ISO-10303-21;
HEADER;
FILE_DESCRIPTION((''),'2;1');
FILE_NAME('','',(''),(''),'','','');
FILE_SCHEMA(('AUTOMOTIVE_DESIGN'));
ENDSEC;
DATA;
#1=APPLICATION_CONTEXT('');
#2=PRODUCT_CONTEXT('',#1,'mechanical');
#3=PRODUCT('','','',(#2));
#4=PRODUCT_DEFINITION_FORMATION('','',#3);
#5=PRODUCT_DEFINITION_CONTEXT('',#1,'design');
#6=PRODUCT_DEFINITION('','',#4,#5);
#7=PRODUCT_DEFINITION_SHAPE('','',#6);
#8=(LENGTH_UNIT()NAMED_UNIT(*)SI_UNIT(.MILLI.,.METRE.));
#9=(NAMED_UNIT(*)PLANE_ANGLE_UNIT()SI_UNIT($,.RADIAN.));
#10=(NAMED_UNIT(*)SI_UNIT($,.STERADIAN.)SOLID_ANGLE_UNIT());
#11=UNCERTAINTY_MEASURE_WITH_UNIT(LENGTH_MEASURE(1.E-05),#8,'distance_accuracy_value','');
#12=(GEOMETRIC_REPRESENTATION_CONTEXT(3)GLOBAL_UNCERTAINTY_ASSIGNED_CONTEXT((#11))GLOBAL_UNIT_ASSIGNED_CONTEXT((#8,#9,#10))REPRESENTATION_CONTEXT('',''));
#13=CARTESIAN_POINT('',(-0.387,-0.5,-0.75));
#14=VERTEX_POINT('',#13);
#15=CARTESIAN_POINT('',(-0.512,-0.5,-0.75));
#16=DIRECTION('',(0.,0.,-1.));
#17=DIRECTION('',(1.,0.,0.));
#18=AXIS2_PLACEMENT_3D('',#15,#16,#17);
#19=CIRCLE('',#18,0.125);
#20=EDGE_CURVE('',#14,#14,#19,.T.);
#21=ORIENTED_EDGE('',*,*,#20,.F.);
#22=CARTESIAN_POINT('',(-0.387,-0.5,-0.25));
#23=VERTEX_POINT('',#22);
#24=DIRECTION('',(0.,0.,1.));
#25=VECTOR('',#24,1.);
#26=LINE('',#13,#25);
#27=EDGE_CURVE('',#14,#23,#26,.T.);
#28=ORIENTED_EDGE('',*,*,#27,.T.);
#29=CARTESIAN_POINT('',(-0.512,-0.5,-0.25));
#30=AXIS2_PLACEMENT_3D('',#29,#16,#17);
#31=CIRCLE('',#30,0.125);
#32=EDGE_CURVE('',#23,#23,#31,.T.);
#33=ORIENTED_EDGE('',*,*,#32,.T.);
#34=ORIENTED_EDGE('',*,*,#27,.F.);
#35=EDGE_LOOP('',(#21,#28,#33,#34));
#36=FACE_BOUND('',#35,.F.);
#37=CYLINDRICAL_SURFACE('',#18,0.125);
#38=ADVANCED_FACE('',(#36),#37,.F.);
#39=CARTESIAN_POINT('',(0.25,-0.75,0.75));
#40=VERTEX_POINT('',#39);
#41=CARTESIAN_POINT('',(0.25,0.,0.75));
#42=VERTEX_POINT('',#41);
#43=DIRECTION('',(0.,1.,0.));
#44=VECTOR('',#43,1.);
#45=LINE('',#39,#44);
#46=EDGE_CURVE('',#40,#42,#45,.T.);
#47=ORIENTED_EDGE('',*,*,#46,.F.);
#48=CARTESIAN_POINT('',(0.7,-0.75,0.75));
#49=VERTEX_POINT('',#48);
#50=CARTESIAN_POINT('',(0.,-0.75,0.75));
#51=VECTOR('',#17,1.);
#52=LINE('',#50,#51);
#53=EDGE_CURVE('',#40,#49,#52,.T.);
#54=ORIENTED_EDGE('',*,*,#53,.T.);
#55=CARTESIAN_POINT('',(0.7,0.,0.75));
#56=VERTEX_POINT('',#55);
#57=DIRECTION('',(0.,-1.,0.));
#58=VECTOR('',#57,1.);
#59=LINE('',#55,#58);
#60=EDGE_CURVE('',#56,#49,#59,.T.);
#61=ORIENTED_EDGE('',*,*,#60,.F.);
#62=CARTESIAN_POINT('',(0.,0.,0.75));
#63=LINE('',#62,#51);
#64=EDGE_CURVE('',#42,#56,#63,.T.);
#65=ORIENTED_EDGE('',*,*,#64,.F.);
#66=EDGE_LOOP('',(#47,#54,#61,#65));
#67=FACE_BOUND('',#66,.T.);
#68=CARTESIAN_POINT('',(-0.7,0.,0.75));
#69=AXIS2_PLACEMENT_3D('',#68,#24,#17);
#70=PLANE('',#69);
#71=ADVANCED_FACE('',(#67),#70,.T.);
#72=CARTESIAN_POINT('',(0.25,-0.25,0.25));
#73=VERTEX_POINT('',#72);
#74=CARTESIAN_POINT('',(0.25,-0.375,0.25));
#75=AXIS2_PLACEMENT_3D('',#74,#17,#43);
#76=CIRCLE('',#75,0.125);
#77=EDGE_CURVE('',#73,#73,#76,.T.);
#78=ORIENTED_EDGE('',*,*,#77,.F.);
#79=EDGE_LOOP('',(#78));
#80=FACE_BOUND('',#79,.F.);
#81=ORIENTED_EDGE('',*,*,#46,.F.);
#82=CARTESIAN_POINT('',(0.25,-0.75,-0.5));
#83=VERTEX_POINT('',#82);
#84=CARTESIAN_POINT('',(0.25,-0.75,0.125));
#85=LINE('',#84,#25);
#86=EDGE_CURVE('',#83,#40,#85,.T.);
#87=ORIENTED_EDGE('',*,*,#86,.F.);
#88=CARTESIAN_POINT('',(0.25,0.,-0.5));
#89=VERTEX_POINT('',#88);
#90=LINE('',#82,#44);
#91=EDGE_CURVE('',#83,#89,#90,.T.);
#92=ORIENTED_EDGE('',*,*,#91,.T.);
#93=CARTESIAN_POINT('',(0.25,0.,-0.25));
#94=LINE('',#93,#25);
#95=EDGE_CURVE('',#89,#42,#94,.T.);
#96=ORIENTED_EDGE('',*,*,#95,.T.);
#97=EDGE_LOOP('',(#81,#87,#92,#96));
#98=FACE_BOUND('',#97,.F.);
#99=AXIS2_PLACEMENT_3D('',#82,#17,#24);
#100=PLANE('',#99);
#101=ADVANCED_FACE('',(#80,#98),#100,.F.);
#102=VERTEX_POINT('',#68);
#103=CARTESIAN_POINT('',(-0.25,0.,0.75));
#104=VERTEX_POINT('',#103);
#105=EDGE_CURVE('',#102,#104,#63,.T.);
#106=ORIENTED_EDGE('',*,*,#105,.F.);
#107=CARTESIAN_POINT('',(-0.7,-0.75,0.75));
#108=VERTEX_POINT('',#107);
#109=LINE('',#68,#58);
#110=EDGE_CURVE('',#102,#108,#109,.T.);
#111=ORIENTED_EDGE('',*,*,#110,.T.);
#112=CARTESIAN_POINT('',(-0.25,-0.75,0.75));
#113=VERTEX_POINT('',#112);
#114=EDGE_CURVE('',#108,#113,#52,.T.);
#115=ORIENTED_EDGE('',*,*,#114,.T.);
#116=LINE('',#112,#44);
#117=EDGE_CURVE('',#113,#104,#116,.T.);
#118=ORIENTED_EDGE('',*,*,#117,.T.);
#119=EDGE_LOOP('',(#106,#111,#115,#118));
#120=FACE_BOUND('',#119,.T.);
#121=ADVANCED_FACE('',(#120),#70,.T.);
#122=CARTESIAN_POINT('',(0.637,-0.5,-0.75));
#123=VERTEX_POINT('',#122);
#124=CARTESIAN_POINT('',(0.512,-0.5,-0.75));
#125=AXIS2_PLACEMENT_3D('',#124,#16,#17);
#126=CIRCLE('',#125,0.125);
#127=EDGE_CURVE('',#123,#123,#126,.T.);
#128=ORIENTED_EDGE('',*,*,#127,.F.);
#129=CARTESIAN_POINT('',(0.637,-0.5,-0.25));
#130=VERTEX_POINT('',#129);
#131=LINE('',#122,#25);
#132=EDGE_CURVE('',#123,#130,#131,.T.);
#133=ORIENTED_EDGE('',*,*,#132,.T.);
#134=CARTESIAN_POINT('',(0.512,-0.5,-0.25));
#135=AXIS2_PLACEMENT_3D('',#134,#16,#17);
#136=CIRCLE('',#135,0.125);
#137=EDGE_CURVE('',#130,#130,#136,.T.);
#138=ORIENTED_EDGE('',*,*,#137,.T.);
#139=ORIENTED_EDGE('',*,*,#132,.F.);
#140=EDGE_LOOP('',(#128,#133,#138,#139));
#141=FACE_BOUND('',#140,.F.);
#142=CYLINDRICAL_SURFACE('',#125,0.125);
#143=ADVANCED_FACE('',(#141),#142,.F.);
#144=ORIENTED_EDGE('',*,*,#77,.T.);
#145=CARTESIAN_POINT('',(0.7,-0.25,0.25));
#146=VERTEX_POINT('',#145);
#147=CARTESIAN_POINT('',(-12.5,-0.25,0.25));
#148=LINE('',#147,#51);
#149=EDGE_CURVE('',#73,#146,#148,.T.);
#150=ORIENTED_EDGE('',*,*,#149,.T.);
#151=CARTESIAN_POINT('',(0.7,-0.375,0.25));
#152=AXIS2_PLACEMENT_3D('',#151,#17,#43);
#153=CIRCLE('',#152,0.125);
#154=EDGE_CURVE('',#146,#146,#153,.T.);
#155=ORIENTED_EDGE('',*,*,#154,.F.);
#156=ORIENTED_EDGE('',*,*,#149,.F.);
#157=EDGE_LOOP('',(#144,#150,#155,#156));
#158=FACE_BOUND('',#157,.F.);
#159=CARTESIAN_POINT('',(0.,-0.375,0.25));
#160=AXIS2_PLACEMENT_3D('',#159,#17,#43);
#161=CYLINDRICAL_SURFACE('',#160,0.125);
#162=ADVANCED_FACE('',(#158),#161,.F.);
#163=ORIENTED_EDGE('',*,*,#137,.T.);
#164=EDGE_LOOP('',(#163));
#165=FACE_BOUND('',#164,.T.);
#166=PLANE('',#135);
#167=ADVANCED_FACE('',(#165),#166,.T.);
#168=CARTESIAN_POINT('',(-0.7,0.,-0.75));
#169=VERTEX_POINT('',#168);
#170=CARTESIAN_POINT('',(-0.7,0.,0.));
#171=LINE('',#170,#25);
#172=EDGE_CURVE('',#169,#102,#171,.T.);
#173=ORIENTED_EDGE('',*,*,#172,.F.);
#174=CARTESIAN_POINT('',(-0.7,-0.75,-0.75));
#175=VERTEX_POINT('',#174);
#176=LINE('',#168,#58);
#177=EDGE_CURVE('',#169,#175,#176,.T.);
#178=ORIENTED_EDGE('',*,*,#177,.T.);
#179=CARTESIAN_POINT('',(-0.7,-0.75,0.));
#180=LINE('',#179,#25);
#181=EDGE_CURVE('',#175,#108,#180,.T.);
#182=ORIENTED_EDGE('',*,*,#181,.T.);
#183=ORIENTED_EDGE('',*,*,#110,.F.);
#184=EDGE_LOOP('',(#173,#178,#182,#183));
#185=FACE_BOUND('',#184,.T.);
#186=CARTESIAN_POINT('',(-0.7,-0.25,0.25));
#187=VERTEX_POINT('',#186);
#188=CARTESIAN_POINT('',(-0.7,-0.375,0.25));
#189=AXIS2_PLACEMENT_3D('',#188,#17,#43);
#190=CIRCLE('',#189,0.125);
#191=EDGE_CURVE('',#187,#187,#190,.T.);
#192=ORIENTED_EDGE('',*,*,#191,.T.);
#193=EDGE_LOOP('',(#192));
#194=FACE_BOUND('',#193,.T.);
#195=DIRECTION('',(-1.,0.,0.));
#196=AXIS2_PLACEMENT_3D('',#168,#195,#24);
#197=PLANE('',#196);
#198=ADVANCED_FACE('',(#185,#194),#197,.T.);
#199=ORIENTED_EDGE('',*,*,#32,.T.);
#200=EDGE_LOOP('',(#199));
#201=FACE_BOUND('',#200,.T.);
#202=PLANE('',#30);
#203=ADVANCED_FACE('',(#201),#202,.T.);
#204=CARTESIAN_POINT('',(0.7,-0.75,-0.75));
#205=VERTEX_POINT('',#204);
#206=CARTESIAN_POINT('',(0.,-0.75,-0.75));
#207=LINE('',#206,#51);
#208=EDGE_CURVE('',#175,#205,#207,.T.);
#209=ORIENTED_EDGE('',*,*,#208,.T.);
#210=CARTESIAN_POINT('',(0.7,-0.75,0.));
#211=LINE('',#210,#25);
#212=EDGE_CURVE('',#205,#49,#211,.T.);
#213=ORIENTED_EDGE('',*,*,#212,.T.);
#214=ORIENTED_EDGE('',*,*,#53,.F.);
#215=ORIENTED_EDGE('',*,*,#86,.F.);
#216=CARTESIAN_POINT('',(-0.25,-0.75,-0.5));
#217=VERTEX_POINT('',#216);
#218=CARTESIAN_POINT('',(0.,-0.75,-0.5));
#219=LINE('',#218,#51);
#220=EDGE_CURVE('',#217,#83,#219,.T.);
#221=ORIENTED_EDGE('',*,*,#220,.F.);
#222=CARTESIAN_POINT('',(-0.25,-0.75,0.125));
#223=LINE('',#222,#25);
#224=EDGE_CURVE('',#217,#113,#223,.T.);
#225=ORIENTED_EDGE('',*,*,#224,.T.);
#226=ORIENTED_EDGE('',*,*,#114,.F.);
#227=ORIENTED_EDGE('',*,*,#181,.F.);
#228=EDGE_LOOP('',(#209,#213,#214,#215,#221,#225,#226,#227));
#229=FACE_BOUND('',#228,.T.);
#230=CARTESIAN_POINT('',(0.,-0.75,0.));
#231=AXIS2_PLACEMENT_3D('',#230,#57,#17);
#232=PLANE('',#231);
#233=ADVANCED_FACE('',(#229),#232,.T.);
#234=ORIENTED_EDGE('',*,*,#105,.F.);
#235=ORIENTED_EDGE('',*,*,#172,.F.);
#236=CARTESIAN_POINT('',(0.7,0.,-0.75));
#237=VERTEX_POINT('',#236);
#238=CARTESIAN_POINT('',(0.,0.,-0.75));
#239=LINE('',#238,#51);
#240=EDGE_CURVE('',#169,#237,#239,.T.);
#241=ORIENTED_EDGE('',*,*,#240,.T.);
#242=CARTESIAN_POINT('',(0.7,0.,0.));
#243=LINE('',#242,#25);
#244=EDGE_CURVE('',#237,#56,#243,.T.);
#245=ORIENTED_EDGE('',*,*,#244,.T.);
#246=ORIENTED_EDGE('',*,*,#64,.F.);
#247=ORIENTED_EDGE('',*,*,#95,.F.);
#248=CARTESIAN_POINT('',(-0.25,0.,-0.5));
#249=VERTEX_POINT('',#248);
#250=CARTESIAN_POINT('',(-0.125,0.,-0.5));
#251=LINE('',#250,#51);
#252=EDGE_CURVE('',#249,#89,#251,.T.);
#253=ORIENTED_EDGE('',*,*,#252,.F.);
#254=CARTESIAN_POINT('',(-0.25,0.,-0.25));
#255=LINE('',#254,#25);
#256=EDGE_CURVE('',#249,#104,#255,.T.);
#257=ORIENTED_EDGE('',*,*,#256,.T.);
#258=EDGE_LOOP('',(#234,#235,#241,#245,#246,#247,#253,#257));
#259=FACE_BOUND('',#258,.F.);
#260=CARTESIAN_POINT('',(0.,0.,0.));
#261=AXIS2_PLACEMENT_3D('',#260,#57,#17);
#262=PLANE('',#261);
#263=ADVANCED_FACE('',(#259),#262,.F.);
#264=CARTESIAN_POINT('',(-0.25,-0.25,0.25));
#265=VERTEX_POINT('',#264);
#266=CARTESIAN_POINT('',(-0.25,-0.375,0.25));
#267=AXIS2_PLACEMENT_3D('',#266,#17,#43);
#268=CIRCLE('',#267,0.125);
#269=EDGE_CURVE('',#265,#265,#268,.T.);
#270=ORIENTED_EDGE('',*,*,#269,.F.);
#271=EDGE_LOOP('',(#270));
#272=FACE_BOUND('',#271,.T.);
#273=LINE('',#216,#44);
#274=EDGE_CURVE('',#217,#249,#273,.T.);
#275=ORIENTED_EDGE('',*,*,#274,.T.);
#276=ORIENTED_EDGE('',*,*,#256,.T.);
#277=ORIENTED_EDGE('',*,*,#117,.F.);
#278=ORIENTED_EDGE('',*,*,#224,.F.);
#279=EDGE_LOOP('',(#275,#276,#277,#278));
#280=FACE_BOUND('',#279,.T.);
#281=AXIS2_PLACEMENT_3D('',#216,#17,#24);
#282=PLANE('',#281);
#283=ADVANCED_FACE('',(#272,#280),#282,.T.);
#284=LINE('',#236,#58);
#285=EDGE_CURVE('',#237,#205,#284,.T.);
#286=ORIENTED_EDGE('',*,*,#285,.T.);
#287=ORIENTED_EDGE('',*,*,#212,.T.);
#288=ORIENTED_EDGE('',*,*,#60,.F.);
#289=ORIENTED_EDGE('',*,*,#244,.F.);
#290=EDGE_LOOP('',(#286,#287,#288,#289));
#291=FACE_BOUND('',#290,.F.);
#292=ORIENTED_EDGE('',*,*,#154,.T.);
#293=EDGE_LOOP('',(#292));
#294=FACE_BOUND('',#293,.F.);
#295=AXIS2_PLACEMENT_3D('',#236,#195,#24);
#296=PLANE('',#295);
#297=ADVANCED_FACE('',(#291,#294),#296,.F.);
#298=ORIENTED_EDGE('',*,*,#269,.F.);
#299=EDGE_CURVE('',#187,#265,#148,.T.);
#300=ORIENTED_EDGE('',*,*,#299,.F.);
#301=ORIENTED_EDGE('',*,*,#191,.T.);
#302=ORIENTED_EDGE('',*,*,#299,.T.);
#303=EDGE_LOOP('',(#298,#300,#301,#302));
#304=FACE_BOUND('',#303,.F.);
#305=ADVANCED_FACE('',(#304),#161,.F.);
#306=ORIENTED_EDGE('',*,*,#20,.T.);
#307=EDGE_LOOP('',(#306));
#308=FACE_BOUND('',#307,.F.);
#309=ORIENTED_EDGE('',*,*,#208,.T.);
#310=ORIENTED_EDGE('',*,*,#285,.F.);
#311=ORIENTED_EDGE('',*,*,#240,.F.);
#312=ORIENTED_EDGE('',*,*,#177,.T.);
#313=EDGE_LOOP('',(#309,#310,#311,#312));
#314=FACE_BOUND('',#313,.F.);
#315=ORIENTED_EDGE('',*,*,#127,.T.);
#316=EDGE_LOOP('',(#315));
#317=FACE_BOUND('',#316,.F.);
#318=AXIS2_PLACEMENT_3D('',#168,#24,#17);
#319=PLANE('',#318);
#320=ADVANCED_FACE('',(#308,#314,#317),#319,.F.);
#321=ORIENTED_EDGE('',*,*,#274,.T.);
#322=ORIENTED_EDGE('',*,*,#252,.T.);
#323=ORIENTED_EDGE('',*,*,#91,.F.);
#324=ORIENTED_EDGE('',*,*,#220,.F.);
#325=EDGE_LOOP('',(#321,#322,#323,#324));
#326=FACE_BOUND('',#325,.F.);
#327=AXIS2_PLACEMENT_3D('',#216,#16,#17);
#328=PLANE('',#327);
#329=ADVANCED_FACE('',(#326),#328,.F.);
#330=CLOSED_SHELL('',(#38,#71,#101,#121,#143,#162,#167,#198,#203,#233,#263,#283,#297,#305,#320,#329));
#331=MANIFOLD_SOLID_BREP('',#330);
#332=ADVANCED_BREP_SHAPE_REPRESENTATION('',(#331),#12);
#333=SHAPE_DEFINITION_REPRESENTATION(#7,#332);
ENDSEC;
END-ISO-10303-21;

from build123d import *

# Parameters (mm, degrees)
F0_W     = 1.4
F0_H     = 1.5
F1_DEPTH = 0.75
F2_R     = 0.125
F3_DEPTH = 12.5
F4_R     = 0.125
F5_DEPTH = 0.5
F6_W     = 0.5
F6_H     = 1.25
F7_DEPTH = 25


# Not quite as in the source:
# - a feature names something its author has since deleted; it is built from what else it names


with BuildPart() as f1:
    # F0 (on Front) → F1 (new body)
    with BuildSketch(Plane.XZ):
        Rectangle(F0_W, F0_H)
    extrude(amount=F1_DEPTH)

    # F2 (on Right) → F3 (cut, symmetric)
    with BuildSketch(Plane.YZ):
        with Locations((-0.375, 0.25)):
            Circle(F2_R)
    extrude(amount=F3_DEPTH, both=True, mode=Mode.SUBTRACT)

    # F4 (on face) → F5 (cut)
    with BuildSketch(Plane(origin=(0, 0, -0.75), x_dir=(1, 0, 0), z_dir=(0, 0, -1))):
        with Locations((0.512, 0.5)):
            Circle(F4_R)
        with Locations((-0.512, 0.5)):
            Circle(F4_R)
    extrude(amount=-F5_DEPTH, mode=Mode.SUBTRACT)

    # F6 (on face) → F7 (cut)
    with BuildSketch(Plane.XZ.offset(0.75)):
        with Locations((0, 0.125)):
            Rectangle(F6_W, F6_H)
    extrude(amount=-F7_DEPTH, mode=Mode.SUBTRACT)


solid = f1.part
